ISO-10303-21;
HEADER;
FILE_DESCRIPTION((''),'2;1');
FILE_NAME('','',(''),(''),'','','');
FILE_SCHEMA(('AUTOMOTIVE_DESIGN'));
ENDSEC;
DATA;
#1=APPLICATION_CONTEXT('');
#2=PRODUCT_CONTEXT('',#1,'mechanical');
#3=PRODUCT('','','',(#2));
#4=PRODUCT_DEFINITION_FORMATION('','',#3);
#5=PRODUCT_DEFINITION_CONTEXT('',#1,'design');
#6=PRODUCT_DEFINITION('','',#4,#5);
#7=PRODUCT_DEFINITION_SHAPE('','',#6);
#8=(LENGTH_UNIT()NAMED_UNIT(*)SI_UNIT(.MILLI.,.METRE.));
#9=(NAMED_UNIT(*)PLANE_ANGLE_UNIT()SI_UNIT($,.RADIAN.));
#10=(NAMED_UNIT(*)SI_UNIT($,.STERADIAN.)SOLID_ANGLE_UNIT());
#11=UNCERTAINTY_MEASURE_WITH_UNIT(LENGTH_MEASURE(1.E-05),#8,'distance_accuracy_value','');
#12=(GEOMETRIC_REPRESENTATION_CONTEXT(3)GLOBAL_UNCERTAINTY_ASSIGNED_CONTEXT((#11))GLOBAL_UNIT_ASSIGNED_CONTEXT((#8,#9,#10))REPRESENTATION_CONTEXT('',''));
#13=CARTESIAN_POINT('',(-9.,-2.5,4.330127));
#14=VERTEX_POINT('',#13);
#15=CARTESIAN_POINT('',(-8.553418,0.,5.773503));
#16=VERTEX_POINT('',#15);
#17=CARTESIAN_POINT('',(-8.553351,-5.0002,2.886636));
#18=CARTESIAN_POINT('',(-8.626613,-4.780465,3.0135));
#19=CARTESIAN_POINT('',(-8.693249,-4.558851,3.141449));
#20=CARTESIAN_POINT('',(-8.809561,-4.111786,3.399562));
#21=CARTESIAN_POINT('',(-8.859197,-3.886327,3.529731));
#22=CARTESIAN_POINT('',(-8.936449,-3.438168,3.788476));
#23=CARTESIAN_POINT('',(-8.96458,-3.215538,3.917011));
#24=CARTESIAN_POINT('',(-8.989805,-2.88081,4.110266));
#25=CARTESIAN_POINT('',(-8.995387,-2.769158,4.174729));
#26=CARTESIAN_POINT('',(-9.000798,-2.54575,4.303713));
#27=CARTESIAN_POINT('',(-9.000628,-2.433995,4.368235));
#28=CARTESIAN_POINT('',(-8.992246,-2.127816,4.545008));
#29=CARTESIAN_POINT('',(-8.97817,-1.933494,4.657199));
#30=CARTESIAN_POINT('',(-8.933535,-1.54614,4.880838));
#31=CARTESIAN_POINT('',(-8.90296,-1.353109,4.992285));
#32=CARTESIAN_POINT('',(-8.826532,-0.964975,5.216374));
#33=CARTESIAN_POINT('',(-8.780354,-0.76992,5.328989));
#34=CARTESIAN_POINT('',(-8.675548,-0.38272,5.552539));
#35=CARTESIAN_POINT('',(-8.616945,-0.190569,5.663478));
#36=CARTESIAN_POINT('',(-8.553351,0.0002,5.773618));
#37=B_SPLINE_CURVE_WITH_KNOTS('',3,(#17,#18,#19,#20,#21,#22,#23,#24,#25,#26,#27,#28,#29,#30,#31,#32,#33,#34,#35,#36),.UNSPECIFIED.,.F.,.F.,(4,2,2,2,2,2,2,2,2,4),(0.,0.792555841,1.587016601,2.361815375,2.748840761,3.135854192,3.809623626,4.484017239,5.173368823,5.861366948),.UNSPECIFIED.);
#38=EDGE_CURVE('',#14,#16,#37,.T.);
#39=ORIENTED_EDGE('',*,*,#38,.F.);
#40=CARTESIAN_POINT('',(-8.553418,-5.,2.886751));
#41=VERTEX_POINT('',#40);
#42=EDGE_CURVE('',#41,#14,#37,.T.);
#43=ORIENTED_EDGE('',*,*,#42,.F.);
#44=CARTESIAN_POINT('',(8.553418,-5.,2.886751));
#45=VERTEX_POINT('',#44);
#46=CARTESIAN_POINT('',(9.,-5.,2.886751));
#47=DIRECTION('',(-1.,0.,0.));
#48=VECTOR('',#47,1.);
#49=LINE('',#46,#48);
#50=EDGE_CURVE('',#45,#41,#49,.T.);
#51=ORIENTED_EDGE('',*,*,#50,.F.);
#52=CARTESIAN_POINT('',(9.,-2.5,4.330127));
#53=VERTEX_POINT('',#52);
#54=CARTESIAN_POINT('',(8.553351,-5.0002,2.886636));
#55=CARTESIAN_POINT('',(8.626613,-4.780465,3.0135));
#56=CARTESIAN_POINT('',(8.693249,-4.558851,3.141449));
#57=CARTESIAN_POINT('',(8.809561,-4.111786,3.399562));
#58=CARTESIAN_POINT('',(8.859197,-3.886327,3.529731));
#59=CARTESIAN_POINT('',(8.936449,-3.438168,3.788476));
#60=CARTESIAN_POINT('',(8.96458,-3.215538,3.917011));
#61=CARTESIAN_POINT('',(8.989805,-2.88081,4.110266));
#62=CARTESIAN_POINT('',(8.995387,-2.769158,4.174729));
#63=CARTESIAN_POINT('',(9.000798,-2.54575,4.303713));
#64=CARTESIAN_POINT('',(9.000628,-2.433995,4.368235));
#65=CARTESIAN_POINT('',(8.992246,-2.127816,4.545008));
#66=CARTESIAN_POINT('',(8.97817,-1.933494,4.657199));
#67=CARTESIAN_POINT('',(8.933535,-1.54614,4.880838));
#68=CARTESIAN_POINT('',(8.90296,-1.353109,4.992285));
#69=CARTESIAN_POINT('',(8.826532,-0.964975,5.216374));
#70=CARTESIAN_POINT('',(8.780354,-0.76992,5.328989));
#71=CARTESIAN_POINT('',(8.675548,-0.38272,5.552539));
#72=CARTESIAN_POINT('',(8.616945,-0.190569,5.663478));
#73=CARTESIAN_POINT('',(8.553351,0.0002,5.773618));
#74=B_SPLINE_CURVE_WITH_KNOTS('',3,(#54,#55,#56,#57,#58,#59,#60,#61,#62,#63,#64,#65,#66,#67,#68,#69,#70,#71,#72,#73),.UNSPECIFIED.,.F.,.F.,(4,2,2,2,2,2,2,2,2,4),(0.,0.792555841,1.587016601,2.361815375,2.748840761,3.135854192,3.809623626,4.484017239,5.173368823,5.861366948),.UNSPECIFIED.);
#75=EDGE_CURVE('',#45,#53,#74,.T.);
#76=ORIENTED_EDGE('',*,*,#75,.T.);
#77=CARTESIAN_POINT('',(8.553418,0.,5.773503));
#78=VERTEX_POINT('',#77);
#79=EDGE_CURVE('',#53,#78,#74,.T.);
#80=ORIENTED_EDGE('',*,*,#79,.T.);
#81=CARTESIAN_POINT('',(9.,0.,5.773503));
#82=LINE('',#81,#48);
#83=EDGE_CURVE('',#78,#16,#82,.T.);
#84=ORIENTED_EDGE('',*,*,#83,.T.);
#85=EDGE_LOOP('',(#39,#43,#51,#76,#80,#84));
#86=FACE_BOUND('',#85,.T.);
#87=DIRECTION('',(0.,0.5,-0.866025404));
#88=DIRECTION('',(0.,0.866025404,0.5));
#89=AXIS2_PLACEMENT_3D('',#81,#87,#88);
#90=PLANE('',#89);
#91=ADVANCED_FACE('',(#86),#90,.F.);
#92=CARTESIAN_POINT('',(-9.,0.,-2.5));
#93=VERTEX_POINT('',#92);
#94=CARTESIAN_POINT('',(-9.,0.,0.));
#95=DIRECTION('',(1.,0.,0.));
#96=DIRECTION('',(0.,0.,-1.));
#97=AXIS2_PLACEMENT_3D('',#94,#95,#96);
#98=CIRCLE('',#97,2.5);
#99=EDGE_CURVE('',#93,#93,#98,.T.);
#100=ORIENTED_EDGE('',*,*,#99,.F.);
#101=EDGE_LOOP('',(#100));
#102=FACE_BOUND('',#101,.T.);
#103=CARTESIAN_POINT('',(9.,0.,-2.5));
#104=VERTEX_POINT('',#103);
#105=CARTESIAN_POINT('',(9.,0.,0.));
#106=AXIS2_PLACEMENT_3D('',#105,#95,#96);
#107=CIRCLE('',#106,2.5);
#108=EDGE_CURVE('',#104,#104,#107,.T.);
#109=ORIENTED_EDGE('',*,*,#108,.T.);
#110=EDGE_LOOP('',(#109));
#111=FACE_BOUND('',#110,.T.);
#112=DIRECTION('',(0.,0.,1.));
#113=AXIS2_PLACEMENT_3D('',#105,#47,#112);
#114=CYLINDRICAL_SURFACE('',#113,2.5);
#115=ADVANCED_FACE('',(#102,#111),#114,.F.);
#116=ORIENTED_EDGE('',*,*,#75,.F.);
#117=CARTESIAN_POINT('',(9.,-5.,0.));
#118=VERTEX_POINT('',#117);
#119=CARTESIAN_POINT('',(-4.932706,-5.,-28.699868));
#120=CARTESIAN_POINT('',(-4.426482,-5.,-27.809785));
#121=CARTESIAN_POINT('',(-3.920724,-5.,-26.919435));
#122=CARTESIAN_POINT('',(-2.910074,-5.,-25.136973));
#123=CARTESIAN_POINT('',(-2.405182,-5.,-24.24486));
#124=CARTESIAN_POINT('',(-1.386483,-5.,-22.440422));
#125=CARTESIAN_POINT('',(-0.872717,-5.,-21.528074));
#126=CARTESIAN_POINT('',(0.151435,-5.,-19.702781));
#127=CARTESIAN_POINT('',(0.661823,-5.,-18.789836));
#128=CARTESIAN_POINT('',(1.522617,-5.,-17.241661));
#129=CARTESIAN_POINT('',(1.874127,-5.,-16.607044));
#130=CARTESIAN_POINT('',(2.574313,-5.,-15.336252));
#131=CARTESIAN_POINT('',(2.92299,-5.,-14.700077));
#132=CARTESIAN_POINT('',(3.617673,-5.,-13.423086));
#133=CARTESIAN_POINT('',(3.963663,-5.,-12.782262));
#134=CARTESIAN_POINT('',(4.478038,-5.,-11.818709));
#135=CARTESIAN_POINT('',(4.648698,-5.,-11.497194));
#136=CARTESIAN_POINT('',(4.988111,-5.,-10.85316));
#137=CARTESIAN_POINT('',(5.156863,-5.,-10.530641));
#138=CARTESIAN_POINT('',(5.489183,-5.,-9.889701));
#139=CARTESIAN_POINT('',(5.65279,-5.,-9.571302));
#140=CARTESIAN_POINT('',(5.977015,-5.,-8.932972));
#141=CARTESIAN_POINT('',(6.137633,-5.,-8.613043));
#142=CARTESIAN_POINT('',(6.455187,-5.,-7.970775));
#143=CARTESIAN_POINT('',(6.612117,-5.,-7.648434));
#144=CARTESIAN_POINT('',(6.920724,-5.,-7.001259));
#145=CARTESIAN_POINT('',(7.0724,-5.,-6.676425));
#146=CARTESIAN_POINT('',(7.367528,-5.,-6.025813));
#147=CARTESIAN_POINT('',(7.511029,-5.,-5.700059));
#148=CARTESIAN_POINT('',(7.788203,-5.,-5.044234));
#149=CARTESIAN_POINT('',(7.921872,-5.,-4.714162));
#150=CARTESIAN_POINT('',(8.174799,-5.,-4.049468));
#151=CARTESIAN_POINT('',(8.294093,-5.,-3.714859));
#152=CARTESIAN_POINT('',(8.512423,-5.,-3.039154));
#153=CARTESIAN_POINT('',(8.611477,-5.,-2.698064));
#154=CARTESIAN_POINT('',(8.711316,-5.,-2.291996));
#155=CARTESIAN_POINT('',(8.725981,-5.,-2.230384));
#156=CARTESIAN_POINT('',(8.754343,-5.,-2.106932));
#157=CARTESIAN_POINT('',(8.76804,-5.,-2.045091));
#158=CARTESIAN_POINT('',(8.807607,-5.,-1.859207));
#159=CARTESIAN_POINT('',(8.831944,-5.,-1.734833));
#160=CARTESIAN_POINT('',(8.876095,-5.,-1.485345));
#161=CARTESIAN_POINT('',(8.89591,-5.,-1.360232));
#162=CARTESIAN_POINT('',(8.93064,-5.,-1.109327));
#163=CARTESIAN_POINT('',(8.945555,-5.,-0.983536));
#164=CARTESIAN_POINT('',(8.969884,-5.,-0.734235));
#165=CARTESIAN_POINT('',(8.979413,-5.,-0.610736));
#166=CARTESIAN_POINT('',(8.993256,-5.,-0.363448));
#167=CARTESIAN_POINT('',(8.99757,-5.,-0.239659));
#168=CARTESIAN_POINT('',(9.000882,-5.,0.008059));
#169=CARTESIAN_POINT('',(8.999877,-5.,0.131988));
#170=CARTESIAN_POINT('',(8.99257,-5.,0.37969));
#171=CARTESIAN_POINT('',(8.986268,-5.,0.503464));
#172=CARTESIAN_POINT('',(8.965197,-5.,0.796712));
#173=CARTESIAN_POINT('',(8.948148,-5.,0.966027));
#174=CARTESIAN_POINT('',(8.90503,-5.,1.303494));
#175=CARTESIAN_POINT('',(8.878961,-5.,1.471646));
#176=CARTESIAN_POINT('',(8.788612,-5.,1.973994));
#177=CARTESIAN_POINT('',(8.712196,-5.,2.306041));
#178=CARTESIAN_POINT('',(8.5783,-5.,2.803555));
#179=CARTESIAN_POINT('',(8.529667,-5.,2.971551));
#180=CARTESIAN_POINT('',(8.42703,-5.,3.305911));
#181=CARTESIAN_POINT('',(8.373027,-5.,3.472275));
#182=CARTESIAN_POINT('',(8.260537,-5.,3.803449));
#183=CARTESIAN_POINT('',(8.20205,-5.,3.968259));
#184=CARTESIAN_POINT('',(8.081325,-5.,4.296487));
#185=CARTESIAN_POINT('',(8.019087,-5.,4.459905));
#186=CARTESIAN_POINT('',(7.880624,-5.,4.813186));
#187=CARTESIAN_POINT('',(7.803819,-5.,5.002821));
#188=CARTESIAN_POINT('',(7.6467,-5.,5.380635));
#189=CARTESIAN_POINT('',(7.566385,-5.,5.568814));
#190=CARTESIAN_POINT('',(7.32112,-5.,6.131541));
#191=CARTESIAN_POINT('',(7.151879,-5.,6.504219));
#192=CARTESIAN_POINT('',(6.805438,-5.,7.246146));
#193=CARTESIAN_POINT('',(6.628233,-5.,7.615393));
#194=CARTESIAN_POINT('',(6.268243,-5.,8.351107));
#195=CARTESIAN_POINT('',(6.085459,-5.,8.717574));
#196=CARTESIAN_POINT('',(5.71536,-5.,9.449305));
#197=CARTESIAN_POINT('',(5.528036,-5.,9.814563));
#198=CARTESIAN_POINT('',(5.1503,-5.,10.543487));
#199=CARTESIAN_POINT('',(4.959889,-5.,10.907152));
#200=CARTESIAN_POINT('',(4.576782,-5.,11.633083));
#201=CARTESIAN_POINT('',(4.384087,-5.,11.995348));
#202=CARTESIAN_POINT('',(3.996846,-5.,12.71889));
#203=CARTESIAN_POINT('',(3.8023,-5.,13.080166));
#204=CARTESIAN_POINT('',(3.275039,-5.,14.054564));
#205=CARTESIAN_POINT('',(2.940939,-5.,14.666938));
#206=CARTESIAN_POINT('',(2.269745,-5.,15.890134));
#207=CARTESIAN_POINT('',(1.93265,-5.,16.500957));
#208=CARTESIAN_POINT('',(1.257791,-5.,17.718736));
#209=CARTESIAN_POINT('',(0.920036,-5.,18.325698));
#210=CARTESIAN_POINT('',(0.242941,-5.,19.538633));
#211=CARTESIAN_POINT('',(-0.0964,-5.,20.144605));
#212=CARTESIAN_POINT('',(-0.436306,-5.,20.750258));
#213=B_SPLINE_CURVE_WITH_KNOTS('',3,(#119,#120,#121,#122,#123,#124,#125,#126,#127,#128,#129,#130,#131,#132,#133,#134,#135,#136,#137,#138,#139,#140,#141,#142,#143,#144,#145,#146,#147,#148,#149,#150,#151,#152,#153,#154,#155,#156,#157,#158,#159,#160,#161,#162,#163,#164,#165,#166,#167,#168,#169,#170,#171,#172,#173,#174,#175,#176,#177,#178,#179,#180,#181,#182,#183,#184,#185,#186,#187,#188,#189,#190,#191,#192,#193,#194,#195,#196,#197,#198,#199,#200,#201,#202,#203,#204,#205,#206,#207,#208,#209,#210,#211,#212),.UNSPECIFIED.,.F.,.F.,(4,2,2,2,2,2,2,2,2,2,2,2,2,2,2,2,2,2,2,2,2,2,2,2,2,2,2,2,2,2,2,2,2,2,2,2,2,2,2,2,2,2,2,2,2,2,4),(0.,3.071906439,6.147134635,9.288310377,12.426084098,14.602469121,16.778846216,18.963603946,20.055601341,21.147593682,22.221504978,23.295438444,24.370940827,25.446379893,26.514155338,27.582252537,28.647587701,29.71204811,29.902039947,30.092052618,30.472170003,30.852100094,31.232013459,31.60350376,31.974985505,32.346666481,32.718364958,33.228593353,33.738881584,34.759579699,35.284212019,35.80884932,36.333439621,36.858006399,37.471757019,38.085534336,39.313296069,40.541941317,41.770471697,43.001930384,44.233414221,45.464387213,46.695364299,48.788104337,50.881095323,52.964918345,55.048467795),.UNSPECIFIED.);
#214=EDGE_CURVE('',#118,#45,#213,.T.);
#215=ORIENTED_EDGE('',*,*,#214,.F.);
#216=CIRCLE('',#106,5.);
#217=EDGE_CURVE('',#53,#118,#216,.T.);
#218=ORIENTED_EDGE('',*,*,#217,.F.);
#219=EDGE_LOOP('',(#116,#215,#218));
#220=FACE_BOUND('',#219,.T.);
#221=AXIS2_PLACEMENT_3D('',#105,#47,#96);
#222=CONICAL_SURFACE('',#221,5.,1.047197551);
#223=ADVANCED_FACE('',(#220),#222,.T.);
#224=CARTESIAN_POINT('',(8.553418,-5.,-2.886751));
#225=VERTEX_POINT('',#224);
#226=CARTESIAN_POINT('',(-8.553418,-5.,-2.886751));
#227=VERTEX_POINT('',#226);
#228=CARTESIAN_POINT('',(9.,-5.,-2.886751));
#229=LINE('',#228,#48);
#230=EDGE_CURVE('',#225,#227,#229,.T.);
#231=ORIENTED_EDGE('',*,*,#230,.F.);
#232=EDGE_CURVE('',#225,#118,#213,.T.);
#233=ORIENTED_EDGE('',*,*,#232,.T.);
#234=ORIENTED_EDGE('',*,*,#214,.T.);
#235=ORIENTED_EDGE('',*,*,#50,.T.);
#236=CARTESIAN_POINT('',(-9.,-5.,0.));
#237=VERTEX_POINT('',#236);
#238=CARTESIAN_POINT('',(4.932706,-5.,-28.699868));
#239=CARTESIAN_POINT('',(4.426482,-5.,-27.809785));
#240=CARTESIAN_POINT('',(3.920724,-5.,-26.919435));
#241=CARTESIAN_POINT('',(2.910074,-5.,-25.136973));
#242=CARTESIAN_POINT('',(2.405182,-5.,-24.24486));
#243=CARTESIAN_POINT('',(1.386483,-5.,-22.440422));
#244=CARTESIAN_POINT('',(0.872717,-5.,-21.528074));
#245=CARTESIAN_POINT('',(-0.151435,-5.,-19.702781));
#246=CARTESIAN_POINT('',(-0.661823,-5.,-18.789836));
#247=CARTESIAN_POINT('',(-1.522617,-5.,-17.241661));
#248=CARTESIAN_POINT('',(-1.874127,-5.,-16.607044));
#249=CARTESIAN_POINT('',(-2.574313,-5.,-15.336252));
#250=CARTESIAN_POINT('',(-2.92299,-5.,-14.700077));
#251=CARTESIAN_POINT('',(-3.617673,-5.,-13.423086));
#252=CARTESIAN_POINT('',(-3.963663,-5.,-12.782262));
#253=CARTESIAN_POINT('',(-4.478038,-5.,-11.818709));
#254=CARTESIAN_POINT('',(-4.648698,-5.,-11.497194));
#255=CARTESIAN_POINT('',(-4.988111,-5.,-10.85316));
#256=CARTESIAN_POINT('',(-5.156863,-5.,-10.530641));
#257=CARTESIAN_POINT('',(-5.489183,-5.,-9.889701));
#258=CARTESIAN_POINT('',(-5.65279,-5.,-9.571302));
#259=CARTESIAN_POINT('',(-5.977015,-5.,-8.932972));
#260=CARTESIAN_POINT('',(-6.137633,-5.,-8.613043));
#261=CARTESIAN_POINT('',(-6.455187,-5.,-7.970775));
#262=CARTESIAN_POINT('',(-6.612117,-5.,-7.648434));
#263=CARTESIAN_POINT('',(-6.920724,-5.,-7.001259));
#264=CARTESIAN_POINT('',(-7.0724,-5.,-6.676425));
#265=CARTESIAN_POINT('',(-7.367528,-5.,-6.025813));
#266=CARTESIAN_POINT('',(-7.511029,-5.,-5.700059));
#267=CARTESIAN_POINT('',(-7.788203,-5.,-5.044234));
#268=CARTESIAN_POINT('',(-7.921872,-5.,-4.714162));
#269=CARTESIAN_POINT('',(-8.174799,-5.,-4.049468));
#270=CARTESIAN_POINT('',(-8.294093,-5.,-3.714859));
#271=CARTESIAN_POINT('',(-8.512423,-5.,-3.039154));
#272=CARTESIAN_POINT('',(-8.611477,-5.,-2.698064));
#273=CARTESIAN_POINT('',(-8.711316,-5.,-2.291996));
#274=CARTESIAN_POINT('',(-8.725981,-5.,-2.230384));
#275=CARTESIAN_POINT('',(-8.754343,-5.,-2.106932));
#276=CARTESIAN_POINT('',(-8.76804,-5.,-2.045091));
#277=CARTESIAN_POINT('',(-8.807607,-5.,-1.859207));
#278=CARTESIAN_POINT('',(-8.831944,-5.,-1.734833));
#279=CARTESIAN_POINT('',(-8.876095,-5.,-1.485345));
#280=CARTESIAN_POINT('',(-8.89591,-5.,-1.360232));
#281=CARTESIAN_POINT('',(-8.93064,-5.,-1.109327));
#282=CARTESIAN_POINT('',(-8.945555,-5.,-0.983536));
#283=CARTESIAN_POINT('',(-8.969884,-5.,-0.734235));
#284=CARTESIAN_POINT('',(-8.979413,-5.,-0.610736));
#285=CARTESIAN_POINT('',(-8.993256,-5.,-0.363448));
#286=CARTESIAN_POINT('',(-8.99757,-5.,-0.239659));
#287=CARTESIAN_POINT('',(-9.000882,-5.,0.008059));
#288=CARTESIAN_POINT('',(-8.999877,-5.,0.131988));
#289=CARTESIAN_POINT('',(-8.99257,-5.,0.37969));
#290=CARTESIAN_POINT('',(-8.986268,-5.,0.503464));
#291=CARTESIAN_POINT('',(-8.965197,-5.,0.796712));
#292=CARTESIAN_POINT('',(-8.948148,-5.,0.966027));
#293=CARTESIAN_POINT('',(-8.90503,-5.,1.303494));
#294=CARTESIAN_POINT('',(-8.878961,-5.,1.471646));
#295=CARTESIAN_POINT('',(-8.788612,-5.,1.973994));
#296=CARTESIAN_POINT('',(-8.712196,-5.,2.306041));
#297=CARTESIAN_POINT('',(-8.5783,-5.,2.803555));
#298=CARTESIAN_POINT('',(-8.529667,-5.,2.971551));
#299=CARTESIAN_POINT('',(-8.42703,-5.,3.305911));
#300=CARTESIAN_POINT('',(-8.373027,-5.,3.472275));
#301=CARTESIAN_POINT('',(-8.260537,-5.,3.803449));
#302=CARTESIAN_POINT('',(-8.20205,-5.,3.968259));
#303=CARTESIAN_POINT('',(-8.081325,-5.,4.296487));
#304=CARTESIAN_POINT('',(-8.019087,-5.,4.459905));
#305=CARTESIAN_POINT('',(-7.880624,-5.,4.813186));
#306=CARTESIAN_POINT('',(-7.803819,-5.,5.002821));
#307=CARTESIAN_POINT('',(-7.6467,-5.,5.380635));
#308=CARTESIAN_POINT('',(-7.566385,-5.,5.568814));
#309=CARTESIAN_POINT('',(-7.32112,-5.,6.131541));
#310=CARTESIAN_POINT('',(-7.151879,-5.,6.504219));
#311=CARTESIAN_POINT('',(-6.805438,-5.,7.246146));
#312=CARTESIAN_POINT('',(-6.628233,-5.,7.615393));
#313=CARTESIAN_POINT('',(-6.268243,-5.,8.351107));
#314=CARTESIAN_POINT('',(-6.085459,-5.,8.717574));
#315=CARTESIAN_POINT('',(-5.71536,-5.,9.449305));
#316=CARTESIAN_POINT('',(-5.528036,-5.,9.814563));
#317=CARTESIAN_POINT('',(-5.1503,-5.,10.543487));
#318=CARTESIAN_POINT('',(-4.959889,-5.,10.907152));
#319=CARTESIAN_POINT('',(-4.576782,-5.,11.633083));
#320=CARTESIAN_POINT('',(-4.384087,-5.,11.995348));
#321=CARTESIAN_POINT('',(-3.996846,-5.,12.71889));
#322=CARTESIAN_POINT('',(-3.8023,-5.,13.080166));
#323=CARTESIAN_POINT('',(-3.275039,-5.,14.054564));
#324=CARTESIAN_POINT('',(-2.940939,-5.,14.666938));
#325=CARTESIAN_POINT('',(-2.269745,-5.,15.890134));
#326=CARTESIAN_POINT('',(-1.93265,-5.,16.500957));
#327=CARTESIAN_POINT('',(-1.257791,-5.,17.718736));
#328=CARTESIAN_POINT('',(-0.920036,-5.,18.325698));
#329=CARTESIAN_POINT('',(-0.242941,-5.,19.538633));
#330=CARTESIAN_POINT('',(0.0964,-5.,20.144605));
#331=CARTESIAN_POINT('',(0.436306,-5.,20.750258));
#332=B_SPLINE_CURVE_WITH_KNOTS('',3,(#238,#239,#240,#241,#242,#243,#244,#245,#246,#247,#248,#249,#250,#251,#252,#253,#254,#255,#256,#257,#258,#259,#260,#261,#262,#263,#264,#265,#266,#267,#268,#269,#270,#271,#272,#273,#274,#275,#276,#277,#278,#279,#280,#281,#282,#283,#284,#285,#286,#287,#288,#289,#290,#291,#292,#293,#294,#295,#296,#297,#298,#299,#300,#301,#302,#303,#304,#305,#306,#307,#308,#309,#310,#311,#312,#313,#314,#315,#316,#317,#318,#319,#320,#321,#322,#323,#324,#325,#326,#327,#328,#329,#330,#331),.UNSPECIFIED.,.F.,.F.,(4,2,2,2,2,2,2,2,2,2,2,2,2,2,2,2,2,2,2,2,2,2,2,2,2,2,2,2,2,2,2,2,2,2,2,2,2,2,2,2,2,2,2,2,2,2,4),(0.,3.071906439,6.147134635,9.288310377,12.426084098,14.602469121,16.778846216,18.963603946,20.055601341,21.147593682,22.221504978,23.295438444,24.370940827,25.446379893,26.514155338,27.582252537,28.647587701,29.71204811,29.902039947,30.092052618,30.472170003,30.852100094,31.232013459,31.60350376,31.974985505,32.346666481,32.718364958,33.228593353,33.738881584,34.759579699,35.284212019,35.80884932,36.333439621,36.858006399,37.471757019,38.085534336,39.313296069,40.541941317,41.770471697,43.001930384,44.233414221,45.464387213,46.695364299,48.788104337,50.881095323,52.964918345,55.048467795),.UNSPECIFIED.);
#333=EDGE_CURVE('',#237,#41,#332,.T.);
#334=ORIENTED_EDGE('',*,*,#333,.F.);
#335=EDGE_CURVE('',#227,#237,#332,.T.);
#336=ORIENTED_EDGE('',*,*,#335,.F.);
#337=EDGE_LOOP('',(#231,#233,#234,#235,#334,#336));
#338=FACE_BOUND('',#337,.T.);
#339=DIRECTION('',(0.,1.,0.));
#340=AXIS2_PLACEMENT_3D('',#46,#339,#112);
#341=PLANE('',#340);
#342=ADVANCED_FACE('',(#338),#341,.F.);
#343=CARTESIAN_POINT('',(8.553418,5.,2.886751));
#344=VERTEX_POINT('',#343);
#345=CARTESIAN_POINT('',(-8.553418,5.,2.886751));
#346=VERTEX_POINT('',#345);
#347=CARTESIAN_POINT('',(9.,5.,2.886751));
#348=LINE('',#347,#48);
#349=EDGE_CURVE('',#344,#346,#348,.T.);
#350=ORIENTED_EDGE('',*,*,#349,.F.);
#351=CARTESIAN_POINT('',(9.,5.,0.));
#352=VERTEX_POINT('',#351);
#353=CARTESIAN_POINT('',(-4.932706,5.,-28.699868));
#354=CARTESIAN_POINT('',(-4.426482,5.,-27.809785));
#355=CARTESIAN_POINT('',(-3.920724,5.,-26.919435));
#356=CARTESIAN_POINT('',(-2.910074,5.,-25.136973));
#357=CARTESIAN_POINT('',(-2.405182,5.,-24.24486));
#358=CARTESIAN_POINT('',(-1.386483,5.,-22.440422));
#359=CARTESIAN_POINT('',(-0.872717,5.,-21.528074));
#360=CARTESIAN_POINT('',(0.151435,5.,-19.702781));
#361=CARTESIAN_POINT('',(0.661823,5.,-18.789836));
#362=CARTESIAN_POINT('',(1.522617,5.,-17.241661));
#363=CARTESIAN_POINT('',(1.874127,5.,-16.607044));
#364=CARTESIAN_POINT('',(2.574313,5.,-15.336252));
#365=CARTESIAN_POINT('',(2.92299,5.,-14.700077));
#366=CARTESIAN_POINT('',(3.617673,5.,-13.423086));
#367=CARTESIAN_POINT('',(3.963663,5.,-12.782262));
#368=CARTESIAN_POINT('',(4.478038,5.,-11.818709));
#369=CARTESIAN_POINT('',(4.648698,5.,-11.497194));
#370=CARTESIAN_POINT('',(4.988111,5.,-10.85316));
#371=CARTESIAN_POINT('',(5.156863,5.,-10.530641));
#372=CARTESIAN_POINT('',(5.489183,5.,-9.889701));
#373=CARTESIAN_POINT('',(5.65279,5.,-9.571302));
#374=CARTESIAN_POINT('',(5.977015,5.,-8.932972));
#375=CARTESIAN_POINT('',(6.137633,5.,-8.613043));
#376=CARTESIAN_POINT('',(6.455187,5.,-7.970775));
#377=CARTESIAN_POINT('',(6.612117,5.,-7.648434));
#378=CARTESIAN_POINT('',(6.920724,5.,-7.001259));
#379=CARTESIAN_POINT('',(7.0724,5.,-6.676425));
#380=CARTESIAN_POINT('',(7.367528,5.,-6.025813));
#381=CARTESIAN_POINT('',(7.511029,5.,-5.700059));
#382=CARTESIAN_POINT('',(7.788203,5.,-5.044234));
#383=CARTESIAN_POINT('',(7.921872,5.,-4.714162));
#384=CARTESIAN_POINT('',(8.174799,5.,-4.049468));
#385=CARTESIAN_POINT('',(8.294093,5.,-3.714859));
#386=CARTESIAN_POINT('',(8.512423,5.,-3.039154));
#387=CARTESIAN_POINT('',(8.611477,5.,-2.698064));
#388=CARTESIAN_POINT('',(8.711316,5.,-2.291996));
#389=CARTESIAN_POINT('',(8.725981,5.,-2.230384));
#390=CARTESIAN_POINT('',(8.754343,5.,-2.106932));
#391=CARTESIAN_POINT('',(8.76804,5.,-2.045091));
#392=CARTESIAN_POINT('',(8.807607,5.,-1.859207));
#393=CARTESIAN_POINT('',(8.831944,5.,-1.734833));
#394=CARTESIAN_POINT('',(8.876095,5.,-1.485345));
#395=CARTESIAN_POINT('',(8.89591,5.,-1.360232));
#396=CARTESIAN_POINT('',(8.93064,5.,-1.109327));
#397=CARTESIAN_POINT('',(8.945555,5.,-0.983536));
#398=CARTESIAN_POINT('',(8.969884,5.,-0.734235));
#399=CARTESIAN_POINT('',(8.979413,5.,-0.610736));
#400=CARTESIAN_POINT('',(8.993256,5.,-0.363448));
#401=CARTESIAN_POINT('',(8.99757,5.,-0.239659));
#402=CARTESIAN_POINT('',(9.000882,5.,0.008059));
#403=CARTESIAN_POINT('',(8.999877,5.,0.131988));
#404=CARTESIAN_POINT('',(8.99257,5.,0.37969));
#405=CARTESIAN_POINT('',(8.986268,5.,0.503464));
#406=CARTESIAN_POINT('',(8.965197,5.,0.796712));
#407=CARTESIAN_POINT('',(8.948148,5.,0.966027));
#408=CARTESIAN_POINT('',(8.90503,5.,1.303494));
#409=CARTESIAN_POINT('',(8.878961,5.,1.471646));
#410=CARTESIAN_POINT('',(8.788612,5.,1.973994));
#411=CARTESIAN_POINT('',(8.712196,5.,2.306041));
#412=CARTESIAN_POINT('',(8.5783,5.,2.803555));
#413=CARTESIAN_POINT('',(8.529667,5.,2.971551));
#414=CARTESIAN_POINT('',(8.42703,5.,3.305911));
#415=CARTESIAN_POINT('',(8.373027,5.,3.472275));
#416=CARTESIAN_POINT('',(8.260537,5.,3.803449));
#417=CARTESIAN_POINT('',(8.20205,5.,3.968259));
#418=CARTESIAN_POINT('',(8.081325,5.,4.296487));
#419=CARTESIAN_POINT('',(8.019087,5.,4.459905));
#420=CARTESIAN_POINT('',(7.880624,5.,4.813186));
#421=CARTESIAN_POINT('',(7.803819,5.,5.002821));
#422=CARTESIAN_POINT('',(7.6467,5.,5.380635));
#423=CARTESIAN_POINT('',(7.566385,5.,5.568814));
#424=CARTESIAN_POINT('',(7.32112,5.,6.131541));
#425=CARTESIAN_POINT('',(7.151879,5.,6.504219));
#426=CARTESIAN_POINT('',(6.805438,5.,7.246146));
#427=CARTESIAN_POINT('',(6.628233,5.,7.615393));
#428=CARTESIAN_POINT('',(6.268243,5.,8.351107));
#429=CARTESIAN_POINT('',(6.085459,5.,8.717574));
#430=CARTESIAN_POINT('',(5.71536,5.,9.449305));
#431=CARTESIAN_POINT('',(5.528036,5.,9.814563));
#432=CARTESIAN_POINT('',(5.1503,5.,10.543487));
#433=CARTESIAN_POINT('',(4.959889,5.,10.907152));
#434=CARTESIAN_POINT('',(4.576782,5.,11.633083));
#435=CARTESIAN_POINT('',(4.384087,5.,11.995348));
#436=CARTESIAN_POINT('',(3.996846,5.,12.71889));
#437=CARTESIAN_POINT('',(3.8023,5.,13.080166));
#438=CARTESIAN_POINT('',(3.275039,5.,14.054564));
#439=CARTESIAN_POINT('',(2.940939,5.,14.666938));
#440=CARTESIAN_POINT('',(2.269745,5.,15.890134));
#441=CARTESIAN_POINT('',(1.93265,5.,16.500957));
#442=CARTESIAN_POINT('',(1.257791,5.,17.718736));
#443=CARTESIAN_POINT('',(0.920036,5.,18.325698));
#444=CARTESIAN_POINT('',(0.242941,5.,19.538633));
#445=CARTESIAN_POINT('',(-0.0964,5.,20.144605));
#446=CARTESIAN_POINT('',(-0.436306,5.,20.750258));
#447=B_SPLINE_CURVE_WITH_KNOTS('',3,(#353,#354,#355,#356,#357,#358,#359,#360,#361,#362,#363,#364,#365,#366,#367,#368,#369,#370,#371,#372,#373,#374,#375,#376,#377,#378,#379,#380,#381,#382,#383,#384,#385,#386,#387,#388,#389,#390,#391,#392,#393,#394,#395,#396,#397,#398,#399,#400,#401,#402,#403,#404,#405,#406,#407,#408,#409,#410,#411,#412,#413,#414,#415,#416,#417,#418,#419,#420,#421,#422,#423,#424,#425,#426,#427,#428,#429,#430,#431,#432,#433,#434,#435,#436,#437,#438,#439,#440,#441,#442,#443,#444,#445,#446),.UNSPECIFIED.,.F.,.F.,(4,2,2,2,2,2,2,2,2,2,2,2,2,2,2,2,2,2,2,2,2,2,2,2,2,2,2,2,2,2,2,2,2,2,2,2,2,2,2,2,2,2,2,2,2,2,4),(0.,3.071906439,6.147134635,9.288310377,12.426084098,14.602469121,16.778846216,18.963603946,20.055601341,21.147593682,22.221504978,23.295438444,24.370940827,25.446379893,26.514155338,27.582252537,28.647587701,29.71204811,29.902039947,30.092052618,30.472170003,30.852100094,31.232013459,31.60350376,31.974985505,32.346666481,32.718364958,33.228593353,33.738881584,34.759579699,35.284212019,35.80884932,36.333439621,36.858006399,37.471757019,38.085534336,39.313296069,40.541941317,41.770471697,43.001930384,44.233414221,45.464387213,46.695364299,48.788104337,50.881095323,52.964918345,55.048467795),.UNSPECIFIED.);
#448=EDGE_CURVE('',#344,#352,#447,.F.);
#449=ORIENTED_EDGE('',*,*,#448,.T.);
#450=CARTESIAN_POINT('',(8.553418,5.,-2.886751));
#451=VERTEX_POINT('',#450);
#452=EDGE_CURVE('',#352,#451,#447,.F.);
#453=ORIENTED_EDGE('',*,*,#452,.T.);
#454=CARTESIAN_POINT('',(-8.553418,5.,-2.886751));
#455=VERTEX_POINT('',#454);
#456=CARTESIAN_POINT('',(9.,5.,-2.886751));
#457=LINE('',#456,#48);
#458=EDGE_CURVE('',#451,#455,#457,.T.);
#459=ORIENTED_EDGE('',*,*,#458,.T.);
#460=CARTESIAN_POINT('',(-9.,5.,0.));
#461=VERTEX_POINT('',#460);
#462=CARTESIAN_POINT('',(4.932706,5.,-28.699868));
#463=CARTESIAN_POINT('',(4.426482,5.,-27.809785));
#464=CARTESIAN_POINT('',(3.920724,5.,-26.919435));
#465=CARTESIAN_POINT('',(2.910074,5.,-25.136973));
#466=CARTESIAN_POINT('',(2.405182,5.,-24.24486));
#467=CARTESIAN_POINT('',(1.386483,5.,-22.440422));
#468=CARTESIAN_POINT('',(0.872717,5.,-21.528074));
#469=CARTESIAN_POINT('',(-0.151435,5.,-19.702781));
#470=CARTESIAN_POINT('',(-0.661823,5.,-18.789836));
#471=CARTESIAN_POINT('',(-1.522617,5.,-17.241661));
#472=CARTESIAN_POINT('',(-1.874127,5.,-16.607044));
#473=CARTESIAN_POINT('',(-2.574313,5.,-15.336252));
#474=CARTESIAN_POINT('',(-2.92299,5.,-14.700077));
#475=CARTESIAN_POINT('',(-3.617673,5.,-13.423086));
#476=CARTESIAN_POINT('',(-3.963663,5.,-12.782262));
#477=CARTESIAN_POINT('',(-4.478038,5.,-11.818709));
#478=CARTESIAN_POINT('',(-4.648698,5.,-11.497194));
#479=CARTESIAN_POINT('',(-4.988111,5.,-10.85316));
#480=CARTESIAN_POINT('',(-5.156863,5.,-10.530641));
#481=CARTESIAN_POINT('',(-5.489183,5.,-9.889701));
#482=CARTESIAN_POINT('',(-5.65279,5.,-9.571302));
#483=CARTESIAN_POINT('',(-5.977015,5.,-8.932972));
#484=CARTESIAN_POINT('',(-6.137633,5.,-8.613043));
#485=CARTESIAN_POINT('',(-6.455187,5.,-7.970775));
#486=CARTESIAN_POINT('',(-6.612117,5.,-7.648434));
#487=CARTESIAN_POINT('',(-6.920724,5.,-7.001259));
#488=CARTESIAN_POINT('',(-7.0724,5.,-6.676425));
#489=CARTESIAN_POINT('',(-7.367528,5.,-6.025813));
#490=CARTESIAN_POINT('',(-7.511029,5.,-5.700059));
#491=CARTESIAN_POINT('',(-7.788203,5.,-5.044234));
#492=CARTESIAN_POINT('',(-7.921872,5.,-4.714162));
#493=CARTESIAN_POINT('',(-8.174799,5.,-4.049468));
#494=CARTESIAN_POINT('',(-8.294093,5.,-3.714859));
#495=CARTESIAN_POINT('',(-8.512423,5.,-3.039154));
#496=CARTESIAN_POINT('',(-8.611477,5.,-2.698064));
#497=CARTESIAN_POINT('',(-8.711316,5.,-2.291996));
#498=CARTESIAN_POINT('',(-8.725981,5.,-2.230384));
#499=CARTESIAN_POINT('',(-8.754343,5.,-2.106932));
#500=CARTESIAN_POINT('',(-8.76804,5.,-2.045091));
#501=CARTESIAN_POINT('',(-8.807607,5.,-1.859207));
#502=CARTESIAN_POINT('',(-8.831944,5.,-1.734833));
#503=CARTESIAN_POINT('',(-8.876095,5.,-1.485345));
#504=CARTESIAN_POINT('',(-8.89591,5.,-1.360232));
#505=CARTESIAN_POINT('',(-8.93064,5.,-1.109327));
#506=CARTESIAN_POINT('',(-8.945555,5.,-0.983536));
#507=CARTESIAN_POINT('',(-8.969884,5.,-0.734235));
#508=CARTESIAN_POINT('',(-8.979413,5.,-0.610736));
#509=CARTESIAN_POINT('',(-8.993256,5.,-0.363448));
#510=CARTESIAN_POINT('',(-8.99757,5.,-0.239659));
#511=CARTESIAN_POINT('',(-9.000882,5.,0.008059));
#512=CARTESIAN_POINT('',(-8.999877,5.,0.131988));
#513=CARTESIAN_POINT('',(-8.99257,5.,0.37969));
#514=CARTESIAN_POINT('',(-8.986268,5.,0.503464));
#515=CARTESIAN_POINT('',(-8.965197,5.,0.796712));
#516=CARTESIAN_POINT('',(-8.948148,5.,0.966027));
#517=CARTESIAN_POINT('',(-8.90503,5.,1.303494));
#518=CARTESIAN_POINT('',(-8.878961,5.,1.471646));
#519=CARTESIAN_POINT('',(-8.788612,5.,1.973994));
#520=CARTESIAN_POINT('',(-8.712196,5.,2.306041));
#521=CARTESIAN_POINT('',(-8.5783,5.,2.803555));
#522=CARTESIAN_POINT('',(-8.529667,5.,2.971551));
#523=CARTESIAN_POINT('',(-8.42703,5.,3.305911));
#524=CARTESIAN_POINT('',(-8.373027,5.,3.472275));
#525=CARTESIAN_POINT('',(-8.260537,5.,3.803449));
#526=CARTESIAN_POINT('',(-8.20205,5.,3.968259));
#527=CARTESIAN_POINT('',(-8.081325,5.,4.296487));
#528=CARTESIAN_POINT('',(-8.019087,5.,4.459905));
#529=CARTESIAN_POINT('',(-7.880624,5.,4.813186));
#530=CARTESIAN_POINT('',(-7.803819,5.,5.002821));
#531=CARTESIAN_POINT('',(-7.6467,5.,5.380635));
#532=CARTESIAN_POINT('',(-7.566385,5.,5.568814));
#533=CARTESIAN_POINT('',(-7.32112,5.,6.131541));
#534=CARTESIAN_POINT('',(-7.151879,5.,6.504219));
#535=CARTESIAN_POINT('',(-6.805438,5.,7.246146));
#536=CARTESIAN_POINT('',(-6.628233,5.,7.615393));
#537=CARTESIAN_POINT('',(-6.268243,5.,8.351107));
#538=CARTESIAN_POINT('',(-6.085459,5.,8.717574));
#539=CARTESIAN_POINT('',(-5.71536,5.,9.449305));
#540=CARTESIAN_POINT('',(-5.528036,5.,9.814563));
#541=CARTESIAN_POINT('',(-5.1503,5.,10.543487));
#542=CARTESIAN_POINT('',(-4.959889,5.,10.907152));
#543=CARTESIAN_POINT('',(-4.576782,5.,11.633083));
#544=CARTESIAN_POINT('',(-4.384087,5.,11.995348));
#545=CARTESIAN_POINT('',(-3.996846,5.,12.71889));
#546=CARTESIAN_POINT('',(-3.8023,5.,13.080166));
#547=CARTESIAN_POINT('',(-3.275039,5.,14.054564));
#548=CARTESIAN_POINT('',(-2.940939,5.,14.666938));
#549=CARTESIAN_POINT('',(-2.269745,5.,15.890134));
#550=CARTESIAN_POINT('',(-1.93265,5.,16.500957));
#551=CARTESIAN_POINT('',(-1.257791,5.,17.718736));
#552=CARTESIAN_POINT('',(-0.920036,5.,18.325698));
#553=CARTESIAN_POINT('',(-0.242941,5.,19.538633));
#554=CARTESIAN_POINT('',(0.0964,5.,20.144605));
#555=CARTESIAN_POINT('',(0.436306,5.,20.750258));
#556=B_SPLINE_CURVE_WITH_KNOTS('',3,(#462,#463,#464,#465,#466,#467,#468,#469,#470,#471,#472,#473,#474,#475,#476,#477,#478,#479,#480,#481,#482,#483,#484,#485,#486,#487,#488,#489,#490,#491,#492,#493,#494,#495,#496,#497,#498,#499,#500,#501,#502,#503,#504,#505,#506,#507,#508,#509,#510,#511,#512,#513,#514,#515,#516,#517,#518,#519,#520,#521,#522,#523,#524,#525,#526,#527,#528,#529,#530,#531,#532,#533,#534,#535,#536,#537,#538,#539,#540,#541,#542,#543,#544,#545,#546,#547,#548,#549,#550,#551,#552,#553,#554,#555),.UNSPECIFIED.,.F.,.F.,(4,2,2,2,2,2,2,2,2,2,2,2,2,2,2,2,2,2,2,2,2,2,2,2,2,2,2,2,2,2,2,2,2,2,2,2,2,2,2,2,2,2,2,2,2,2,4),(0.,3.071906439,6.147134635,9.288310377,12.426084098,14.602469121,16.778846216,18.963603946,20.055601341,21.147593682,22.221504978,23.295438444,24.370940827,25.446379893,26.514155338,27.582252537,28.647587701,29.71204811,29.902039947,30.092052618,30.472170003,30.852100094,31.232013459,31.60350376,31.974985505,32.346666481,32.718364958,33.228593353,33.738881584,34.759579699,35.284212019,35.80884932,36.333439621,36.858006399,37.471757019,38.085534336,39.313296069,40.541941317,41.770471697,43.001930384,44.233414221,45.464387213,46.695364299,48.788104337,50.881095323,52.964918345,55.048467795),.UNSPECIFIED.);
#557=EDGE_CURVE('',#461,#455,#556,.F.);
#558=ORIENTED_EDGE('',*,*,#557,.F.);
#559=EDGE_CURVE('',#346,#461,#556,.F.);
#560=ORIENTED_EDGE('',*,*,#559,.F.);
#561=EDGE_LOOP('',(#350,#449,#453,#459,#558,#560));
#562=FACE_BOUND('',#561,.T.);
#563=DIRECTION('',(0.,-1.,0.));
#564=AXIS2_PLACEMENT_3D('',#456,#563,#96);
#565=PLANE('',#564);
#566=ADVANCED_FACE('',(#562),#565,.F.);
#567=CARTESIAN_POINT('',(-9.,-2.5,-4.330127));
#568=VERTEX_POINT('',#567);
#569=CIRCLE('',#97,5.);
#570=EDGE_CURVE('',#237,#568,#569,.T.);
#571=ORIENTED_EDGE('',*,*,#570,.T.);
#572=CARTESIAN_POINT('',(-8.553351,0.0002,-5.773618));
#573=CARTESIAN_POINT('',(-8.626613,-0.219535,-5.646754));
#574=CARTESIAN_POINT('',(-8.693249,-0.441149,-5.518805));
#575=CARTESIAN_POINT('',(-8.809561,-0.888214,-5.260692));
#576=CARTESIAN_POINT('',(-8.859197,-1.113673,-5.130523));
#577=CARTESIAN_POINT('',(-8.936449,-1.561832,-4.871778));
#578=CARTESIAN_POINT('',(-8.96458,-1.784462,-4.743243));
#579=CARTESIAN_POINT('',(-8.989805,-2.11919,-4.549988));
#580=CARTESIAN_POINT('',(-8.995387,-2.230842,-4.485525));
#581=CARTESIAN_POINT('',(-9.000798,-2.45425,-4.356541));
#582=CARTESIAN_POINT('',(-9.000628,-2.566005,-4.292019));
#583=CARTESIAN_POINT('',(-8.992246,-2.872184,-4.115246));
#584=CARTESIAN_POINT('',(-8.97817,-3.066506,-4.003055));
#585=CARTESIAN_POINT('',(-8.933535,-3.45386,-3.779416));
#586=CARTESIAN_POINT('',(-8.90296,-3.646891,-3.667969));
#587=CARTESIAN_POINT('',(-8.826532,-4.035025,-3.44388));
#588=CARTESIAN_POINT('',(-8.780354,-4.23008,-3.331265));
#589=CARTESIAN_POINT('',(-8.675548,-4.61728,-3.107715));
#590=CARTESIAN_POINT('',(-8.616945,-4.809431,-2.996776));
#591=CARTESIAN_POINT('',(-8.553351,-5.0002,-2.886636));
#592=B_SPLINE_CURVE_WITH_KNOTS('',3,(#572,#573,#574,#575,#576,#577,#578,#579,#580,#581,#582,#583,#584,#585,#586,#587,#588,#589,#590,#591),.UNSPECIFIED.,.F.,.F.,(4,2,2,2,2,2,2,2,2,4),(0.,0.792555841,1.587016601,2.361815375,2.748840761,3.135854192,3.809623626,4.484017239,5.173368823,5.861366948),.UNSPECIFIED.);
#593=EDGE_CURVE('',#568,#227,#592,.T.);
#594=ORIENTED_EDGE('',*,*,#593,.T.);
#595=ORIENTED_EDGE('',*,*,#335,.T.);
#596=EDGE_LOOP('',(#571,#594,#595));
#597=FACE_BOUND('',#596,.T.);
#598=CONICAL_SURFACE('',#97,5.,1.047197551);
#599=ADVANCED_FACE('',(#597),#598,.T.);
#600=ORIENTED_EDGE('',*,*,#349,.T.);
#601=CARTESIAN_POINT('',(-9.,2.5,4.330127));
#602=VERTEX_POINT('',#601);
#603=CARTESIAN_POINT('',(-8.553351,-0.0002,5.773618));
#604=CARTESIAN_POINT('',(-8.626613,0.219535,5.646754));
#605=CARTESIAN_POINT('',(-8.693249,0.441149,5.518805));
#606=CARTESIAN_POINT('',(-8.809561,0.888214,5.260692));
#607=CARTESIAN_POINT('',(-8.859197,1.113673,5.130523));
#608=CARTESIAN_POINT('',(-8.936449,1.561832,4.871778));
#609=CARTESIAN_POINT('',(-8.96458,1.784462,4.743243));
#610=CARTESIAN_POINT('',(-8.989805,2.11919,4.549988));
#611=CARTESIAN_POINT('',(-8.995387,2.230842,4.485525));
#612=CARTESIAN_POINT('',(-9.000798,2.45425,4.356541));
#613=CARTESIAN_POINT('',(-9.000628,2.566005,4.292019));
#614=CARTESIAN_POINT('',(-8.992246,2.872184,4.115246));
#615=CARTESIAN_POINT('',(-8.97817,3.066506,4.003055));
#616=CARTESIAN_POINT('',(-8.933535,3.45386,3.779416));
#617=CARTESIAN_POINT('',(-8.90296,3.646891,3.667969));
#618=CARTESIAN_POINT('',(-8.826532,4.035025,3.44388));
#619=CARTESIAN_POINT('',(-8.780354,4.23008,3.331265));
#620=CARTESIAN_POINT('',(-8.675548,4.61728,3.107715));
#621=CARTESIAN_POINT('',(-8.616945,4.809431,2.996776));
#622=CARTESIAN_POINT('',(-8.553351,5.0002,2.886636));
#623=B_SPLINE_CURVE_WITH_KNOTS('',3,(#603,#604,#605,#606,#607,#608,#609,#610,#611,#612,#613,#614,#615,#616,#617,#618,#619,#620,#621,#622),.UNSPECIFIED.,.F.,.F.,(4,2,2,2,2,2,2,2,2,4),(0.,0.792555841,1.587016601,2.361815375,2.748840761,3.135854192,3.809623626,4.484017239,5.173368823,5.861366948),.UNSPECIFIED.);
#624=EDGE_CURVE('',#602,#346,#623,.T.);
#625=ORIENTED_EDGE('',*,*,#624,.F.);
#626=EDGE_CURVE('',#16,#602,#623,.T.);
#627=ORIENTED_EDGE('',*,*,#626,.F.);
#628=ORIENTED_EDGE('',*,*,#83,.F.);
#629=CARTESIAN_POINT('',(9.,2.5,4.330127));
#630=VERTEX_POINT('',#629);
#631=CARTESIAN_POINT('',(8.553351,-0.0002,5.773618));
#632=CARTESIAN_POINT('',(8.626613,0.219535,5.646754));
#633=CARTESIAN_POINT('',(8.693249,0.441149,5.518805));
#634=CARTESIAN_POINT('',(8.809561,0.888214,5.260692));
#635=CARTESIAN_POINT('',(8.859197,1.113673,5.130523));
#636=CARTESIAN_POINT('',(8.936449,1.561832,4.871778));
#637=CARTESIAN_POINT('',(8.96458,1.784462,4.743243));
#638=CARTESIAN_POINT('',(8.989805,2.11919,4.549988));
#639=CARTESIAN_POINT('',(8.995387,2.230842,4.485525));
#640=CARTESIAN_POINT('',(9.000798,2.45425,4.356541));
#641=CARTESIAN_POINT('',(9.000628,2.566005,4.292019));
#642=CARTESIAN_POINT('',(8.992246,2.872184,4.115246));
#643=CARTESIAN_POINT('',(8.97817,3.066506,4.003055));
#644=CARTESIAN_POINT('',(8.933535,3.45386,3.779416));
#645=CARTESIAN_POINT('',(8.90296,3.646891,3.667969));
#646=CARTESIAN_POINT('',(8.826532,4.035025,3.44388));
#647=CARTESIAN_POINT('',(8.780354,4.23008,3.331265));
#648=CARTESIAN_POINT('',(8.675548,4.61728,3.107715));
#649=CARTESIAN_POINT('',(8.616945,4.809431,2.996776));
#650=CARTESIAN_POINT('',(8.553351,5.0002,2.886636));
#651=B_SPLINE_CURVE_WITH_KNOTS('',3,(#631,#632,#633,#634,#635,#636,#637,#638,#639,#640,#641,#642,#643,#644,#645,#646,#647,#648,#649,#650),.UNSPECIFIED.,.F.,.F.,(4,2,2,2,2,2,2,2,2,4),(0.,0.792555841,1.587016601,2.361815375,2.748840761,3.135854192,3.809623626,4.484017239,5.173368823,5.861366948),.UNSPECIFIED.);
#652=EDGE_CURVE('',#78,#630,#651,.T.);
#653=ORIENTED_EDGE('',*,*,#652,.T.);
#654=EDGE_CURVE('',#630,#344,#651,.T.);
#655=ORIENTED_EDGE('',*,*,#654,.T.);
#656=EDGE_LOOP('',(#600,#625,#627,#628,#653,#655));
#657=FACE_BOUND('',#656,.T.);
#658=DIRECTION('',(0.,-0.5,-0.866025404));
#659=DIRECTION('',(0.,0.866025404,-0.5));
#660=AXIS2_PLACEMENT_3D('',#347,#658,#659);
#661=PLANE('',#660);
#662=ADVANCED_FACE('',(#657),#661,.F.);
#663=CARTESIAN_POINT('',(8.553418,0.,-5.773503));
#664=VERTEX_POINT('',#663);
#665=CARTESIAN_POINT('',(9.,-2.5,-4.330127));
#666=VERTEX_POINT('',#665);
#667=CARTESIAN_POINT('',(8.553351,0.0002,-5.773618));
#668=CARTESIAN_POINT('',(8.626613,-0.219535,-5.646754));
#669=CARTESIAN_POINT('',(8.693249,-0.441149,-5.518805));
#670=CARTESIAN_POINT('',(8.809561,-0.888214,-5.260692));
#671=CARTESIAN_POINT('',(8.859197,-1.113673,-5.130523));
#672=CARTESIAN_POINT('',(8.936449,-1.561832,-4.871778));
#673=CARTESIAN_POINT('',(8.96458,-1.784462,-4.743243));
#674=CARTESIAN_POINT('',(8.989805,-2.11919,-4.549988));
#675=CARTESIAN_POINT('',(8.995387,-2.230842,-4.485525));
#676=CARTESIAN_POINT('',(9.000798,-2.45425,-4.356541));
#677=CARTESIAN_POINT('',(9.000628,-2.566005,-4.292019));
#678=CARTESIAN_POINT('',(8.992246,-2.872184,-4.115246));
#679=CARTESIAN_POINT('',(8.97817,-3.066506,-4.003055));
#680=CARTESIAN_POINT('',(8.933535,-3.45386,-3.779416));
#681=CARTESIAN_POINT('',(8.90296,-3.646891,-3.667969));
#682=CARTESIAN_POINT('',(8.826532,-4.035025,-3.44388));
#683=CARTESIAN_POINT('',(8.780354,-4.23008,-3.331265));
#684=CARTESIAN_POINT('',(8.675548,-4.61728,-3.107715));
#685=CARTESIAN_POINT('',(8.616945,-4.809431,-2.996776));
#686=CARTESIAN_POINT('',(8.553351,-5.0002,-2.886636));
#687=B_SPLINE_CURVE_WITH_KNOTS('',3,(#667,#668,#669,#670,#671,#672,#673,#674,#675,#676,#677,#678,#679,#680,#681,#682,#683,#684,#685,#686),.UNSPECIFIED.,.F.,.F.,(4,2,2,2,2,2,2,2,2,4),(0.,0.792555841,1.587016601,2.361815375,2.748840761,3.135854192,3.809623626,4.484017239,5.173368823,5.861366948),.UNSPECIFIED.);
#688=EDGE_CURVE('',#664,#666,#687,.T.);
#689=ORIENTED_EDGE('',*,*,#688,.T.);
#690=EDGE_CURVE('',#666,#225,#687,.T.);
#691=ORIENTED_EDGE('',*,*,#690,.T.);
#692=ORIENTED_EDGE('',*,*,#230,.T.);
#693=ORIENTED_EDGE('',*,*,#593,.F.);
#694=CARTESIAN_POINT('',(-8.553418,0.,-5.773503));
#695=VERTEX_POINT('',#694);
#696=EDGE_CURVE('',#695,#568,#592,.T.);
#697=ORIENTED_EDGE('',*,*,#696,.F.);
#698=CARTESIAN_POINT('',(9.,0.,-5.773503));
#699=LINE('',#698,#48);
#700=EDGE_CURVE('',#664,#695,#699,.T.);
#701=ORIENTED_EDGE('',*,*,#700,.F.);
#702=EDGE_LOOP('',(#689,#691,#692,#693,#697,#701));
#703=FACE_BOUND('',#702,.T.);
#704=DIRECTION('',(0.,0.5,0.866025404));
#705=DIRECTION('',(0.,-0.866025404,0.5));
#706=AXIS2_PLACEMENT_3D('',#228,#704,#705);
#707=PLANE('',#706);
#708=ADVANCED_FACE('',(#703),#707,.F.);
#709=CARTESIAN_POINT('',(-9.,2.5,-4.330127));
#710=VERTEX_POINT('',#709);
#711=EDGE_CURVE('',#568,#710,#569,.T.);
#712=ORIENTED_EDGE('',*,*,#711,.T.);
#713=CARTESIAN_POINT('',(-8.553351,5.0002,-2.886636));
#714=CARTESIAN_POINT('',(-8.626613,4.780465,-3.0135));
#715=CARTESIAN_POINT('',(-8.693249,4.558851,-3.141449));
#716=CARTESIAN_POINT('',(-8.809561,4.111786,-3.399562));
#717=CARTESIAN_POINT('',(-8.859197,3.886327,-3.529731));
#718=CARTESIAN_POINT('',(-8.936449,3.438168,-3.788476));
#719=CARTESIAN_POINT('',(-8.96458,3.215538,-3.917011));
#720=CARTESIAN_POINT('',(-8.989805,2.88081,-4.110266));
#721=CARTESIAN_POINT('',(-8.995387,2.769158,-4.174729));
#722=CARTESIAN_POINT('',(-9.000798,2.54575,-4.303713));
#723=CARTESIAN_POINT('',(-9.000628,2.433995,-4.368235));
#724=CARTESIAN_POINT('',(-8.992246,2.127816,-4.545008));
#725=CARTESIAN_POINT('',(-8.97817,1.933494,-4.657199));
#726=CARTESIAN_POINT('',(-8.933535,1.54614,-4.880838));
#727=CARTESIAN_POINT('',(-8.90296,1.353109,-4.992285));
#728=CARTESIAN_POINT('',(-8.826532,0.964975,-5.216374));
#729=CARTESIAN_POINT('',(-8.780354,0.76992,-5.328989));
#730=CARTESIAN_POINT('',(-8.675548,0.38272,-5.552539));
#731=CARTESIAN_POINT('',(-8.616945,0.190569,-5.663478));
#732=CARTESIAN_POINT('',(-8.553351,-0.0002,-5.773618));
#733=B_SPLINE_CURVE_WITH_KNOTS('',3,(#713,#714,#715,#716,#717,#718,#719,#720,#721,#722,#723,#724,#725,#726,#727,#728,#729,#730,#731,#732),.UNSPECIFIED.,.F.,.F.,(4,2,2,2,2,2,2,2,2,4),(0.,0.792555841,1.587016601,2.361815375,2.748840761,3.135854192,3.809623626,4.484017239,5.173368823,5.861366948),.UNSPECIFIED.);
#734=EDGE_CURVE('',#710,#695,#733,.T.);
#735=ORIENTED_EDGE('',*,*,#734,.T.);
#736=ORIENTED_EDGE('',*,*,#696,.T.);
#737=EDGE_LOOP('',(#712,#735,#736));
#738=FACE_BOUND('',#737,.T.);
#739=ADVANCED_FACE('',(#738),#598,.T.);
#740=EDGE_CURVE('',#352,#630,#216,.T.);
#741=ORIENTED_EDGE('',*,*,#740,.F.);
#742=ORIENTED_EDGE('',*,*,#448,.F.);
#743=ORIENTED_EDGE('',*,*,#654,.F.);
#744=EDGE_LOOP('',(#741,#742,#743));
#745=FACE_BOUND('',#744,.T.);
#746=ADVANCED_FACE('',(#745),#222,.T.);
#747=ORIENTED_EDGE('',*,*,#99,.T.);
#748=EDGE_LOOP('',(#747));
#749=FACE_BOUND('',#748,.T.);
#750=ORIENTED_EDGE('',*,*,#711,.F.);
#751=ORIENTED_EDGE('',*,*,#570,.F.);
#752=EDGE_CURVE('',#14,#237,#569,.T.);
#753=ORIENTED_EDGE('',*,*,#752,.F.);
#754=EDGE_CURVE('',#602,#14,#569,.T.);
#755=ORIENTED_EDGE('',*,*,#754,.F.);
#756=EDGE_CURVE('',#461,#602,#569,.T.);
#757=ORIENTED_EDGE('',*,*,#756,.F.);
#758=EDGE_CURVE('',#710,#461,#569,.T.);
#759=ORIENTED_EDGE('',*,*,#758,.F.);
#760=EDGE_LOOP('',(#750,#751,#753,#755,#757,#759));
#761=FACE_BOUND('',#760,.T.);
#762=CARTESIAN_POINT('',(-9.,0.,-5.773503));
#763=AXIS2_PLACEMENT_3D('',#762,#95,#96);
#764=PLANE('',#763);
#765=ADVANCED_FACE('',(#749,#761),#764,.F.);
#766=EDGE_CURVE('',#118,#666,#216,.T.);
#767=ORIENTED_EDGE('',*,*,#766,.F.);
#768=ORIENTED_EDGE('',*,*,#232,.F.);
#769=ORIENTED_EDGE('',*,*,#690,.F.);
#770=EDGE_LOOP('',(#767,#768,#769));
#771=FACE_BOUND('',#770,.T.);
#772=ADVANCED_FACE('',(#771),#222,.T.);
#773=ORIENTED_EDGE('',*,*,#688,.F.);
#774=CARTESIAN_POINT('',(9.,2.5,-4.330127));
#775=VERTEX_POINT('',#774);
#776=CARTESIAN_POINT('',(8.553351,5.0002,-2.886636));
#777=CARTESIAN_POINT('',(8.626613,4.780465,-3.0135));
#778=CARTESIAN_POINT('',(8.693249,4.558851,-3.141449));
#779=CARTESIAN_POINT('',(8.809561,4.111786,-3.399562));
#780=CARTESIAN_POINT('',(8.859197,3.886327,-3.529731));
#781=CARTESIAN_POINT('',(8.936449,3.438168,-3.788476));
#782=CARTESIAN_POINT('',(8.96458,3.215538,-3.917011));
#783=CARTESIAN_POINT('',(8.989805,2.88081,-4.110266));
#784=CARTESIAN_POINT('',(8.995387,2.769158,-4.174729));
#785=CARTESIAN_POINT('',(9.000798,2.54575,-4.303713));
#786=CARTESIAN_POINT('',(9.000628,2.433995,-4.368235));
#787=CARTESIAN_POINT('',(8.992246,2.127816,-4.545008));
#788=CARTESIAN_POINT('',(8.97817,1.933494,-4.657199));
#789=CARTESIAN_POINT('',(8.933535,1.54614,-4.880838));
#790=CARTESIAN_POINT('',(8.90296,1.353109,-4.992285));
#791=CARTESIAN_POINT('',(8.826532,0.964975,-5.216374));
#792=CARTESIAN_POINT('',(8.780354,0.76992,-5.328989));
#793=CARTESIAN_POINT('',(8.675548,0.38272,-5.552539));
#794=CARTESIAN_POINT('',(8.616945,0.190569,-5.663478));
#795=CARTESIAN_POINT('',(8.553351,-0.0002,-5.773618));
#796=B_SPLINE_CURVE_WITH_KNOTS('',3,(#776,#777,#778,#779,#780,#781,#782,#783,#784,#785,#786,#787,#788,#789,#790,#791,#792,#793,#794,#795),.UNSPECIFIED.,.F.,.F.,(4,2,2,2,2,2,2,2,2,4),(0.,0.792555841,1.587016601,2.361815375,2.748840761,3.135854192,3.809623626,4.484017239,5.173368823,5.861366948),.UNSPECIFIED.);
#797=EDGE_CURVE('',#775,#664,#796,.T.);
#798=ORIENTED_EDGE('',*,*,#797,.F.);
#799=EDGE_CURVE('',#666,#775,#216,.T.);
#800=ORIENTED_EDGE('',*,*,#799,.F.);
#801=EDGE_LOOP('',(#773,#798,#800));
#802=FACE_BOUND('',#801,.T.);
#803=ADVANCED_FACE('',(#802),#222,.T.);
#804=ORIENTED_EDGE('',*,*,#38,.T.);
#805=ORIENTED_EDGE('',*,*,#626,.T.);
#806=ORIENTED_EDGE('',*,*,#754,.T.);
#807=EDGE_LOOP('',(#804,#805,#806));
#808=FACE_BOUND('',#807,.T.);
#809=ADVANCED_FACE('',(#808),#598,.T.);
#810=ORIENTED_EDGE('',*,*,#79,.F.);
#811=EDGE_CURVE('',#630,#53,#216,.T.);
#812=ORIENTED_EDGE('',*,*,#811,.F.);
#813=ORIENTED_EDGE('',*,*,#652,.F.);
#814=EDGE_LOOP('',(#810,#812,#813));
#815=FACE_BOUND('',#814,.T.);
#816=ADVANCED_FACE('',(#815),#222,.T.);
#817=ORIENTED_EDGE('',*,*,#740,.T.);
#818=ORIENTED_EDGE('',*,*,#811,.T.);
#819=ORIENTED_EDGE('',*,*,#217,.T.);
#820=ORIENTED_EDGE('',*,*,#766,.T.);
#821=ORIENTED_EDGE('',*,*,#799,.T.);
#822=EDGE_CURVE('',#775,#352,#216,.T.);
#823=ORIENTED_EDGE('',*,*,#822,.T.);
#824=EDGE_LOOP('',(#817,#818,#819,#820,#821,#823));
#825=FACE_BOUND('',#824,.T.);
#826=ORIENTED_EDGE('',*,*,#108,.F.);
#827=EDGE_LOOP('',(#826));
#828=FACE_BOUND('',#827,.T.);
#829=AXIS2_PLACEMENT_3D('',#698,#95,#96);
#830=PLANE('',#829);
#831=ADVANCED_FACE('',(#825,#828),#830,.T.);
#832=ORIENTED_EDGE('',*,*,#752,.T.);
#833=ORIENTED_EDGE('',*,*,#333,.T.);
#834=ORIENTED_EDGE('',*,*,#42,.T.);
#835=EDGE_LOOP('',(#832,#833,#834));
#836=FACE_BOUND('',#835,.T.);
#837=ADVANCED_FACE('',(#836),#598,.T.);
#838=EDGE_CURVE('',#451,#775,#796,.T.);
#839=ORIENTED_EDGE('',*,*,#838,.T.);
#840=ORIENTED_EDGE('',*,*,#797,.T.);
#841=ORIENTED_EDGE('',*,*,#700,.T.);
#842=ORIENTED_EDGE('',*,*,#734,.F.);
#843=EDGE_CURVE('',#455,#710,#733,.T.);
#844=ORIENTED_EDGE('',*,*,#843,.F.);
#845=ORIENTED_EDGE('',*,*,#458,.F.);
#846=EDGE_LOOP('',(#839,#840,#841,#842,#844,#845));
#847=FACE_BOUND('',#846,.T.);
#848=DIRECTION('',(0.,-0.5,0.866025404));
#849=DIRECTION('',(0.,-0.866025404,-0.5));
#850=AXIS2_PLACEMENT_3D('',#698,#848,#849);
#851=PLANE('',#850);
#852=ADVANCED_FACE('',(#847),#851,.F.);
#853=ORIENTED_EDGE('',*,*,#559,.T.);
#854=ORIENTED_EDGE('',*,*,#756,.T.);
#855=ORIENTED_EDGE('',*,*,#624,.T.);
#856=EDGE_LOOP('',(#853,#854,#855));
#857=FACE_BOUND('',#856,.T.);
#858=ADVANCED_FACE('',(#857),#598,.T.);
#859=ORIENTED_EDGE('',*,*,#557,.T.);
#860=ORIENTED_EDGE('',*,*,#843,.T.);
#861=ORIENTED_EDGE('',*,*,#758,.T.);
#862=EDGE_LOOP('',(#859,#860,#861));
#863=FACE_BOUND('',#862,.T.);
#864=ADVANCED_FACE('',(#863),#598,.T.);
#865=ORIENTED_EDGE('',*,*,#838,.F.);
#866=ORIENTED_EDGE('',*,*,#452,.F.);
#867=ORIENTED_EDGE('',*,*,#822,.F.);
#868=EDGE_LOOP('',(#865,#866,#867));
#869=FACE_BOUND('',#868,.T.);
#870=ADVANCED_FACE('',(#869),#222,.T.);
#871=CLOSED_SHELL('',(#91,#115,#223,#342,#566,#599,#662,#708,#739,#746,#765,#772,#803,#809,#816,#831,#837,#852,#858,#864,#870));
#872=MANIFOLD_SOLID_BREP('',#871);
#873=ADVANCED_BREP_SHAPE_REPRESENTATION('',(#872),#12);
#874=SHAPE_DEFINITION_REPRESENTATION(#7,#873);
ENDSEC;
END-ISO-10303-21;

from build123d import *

# Parameters (mm, degrees)
SKETCH1_R      = 2.5
EXTRUDE1_DEPTH = 9


# Read off the part's stored shape, not the designer's step: Cut-Extrude1
with BuildPart() as part:
    # Sketch1 → Extrude1 (new, symmetric)
    with BuildSketch(Plane(origin=(0, 0, 0), x_dir=(0, 0, -1), z_dir=(1, 0, 0))):
        Polygon((5.773502692, 0), (2.886751346, 5), (-2.886751346, 5), (-5.773502692, 0), (-2.886751346, -5), (2.886751346, -5), align=None)
        Circle(SKETCH1_R, mode=Mode.SUBTRACT)
    extrude(amount=EXTRUDE1_DEPTH, both=True)

    # Cut-Extrude1 outline → Cut-Extrude1 (revolve, cut)
    with BuildSketch(Plane.YX):
        Polygon((5.773502692, 9.000000845), (4.99999886, 9.000000845), (5.773502688, 8.553418015), align=None)
    cut_extrude1 = revolve(axis=Axis((0, 0, 0), (1, 0, 0)), mode=Mode.SUBTRACT)

    # Mirror1: Cut-Extrude1 across plane
    add(cut_extrude1.mirror(Plane(origin=(0, 0, 0), x_dir=(0, 0, 1), z_dir=(1, 0, 0))), mode=Mode.SUBTRACT)


solid = part.part
